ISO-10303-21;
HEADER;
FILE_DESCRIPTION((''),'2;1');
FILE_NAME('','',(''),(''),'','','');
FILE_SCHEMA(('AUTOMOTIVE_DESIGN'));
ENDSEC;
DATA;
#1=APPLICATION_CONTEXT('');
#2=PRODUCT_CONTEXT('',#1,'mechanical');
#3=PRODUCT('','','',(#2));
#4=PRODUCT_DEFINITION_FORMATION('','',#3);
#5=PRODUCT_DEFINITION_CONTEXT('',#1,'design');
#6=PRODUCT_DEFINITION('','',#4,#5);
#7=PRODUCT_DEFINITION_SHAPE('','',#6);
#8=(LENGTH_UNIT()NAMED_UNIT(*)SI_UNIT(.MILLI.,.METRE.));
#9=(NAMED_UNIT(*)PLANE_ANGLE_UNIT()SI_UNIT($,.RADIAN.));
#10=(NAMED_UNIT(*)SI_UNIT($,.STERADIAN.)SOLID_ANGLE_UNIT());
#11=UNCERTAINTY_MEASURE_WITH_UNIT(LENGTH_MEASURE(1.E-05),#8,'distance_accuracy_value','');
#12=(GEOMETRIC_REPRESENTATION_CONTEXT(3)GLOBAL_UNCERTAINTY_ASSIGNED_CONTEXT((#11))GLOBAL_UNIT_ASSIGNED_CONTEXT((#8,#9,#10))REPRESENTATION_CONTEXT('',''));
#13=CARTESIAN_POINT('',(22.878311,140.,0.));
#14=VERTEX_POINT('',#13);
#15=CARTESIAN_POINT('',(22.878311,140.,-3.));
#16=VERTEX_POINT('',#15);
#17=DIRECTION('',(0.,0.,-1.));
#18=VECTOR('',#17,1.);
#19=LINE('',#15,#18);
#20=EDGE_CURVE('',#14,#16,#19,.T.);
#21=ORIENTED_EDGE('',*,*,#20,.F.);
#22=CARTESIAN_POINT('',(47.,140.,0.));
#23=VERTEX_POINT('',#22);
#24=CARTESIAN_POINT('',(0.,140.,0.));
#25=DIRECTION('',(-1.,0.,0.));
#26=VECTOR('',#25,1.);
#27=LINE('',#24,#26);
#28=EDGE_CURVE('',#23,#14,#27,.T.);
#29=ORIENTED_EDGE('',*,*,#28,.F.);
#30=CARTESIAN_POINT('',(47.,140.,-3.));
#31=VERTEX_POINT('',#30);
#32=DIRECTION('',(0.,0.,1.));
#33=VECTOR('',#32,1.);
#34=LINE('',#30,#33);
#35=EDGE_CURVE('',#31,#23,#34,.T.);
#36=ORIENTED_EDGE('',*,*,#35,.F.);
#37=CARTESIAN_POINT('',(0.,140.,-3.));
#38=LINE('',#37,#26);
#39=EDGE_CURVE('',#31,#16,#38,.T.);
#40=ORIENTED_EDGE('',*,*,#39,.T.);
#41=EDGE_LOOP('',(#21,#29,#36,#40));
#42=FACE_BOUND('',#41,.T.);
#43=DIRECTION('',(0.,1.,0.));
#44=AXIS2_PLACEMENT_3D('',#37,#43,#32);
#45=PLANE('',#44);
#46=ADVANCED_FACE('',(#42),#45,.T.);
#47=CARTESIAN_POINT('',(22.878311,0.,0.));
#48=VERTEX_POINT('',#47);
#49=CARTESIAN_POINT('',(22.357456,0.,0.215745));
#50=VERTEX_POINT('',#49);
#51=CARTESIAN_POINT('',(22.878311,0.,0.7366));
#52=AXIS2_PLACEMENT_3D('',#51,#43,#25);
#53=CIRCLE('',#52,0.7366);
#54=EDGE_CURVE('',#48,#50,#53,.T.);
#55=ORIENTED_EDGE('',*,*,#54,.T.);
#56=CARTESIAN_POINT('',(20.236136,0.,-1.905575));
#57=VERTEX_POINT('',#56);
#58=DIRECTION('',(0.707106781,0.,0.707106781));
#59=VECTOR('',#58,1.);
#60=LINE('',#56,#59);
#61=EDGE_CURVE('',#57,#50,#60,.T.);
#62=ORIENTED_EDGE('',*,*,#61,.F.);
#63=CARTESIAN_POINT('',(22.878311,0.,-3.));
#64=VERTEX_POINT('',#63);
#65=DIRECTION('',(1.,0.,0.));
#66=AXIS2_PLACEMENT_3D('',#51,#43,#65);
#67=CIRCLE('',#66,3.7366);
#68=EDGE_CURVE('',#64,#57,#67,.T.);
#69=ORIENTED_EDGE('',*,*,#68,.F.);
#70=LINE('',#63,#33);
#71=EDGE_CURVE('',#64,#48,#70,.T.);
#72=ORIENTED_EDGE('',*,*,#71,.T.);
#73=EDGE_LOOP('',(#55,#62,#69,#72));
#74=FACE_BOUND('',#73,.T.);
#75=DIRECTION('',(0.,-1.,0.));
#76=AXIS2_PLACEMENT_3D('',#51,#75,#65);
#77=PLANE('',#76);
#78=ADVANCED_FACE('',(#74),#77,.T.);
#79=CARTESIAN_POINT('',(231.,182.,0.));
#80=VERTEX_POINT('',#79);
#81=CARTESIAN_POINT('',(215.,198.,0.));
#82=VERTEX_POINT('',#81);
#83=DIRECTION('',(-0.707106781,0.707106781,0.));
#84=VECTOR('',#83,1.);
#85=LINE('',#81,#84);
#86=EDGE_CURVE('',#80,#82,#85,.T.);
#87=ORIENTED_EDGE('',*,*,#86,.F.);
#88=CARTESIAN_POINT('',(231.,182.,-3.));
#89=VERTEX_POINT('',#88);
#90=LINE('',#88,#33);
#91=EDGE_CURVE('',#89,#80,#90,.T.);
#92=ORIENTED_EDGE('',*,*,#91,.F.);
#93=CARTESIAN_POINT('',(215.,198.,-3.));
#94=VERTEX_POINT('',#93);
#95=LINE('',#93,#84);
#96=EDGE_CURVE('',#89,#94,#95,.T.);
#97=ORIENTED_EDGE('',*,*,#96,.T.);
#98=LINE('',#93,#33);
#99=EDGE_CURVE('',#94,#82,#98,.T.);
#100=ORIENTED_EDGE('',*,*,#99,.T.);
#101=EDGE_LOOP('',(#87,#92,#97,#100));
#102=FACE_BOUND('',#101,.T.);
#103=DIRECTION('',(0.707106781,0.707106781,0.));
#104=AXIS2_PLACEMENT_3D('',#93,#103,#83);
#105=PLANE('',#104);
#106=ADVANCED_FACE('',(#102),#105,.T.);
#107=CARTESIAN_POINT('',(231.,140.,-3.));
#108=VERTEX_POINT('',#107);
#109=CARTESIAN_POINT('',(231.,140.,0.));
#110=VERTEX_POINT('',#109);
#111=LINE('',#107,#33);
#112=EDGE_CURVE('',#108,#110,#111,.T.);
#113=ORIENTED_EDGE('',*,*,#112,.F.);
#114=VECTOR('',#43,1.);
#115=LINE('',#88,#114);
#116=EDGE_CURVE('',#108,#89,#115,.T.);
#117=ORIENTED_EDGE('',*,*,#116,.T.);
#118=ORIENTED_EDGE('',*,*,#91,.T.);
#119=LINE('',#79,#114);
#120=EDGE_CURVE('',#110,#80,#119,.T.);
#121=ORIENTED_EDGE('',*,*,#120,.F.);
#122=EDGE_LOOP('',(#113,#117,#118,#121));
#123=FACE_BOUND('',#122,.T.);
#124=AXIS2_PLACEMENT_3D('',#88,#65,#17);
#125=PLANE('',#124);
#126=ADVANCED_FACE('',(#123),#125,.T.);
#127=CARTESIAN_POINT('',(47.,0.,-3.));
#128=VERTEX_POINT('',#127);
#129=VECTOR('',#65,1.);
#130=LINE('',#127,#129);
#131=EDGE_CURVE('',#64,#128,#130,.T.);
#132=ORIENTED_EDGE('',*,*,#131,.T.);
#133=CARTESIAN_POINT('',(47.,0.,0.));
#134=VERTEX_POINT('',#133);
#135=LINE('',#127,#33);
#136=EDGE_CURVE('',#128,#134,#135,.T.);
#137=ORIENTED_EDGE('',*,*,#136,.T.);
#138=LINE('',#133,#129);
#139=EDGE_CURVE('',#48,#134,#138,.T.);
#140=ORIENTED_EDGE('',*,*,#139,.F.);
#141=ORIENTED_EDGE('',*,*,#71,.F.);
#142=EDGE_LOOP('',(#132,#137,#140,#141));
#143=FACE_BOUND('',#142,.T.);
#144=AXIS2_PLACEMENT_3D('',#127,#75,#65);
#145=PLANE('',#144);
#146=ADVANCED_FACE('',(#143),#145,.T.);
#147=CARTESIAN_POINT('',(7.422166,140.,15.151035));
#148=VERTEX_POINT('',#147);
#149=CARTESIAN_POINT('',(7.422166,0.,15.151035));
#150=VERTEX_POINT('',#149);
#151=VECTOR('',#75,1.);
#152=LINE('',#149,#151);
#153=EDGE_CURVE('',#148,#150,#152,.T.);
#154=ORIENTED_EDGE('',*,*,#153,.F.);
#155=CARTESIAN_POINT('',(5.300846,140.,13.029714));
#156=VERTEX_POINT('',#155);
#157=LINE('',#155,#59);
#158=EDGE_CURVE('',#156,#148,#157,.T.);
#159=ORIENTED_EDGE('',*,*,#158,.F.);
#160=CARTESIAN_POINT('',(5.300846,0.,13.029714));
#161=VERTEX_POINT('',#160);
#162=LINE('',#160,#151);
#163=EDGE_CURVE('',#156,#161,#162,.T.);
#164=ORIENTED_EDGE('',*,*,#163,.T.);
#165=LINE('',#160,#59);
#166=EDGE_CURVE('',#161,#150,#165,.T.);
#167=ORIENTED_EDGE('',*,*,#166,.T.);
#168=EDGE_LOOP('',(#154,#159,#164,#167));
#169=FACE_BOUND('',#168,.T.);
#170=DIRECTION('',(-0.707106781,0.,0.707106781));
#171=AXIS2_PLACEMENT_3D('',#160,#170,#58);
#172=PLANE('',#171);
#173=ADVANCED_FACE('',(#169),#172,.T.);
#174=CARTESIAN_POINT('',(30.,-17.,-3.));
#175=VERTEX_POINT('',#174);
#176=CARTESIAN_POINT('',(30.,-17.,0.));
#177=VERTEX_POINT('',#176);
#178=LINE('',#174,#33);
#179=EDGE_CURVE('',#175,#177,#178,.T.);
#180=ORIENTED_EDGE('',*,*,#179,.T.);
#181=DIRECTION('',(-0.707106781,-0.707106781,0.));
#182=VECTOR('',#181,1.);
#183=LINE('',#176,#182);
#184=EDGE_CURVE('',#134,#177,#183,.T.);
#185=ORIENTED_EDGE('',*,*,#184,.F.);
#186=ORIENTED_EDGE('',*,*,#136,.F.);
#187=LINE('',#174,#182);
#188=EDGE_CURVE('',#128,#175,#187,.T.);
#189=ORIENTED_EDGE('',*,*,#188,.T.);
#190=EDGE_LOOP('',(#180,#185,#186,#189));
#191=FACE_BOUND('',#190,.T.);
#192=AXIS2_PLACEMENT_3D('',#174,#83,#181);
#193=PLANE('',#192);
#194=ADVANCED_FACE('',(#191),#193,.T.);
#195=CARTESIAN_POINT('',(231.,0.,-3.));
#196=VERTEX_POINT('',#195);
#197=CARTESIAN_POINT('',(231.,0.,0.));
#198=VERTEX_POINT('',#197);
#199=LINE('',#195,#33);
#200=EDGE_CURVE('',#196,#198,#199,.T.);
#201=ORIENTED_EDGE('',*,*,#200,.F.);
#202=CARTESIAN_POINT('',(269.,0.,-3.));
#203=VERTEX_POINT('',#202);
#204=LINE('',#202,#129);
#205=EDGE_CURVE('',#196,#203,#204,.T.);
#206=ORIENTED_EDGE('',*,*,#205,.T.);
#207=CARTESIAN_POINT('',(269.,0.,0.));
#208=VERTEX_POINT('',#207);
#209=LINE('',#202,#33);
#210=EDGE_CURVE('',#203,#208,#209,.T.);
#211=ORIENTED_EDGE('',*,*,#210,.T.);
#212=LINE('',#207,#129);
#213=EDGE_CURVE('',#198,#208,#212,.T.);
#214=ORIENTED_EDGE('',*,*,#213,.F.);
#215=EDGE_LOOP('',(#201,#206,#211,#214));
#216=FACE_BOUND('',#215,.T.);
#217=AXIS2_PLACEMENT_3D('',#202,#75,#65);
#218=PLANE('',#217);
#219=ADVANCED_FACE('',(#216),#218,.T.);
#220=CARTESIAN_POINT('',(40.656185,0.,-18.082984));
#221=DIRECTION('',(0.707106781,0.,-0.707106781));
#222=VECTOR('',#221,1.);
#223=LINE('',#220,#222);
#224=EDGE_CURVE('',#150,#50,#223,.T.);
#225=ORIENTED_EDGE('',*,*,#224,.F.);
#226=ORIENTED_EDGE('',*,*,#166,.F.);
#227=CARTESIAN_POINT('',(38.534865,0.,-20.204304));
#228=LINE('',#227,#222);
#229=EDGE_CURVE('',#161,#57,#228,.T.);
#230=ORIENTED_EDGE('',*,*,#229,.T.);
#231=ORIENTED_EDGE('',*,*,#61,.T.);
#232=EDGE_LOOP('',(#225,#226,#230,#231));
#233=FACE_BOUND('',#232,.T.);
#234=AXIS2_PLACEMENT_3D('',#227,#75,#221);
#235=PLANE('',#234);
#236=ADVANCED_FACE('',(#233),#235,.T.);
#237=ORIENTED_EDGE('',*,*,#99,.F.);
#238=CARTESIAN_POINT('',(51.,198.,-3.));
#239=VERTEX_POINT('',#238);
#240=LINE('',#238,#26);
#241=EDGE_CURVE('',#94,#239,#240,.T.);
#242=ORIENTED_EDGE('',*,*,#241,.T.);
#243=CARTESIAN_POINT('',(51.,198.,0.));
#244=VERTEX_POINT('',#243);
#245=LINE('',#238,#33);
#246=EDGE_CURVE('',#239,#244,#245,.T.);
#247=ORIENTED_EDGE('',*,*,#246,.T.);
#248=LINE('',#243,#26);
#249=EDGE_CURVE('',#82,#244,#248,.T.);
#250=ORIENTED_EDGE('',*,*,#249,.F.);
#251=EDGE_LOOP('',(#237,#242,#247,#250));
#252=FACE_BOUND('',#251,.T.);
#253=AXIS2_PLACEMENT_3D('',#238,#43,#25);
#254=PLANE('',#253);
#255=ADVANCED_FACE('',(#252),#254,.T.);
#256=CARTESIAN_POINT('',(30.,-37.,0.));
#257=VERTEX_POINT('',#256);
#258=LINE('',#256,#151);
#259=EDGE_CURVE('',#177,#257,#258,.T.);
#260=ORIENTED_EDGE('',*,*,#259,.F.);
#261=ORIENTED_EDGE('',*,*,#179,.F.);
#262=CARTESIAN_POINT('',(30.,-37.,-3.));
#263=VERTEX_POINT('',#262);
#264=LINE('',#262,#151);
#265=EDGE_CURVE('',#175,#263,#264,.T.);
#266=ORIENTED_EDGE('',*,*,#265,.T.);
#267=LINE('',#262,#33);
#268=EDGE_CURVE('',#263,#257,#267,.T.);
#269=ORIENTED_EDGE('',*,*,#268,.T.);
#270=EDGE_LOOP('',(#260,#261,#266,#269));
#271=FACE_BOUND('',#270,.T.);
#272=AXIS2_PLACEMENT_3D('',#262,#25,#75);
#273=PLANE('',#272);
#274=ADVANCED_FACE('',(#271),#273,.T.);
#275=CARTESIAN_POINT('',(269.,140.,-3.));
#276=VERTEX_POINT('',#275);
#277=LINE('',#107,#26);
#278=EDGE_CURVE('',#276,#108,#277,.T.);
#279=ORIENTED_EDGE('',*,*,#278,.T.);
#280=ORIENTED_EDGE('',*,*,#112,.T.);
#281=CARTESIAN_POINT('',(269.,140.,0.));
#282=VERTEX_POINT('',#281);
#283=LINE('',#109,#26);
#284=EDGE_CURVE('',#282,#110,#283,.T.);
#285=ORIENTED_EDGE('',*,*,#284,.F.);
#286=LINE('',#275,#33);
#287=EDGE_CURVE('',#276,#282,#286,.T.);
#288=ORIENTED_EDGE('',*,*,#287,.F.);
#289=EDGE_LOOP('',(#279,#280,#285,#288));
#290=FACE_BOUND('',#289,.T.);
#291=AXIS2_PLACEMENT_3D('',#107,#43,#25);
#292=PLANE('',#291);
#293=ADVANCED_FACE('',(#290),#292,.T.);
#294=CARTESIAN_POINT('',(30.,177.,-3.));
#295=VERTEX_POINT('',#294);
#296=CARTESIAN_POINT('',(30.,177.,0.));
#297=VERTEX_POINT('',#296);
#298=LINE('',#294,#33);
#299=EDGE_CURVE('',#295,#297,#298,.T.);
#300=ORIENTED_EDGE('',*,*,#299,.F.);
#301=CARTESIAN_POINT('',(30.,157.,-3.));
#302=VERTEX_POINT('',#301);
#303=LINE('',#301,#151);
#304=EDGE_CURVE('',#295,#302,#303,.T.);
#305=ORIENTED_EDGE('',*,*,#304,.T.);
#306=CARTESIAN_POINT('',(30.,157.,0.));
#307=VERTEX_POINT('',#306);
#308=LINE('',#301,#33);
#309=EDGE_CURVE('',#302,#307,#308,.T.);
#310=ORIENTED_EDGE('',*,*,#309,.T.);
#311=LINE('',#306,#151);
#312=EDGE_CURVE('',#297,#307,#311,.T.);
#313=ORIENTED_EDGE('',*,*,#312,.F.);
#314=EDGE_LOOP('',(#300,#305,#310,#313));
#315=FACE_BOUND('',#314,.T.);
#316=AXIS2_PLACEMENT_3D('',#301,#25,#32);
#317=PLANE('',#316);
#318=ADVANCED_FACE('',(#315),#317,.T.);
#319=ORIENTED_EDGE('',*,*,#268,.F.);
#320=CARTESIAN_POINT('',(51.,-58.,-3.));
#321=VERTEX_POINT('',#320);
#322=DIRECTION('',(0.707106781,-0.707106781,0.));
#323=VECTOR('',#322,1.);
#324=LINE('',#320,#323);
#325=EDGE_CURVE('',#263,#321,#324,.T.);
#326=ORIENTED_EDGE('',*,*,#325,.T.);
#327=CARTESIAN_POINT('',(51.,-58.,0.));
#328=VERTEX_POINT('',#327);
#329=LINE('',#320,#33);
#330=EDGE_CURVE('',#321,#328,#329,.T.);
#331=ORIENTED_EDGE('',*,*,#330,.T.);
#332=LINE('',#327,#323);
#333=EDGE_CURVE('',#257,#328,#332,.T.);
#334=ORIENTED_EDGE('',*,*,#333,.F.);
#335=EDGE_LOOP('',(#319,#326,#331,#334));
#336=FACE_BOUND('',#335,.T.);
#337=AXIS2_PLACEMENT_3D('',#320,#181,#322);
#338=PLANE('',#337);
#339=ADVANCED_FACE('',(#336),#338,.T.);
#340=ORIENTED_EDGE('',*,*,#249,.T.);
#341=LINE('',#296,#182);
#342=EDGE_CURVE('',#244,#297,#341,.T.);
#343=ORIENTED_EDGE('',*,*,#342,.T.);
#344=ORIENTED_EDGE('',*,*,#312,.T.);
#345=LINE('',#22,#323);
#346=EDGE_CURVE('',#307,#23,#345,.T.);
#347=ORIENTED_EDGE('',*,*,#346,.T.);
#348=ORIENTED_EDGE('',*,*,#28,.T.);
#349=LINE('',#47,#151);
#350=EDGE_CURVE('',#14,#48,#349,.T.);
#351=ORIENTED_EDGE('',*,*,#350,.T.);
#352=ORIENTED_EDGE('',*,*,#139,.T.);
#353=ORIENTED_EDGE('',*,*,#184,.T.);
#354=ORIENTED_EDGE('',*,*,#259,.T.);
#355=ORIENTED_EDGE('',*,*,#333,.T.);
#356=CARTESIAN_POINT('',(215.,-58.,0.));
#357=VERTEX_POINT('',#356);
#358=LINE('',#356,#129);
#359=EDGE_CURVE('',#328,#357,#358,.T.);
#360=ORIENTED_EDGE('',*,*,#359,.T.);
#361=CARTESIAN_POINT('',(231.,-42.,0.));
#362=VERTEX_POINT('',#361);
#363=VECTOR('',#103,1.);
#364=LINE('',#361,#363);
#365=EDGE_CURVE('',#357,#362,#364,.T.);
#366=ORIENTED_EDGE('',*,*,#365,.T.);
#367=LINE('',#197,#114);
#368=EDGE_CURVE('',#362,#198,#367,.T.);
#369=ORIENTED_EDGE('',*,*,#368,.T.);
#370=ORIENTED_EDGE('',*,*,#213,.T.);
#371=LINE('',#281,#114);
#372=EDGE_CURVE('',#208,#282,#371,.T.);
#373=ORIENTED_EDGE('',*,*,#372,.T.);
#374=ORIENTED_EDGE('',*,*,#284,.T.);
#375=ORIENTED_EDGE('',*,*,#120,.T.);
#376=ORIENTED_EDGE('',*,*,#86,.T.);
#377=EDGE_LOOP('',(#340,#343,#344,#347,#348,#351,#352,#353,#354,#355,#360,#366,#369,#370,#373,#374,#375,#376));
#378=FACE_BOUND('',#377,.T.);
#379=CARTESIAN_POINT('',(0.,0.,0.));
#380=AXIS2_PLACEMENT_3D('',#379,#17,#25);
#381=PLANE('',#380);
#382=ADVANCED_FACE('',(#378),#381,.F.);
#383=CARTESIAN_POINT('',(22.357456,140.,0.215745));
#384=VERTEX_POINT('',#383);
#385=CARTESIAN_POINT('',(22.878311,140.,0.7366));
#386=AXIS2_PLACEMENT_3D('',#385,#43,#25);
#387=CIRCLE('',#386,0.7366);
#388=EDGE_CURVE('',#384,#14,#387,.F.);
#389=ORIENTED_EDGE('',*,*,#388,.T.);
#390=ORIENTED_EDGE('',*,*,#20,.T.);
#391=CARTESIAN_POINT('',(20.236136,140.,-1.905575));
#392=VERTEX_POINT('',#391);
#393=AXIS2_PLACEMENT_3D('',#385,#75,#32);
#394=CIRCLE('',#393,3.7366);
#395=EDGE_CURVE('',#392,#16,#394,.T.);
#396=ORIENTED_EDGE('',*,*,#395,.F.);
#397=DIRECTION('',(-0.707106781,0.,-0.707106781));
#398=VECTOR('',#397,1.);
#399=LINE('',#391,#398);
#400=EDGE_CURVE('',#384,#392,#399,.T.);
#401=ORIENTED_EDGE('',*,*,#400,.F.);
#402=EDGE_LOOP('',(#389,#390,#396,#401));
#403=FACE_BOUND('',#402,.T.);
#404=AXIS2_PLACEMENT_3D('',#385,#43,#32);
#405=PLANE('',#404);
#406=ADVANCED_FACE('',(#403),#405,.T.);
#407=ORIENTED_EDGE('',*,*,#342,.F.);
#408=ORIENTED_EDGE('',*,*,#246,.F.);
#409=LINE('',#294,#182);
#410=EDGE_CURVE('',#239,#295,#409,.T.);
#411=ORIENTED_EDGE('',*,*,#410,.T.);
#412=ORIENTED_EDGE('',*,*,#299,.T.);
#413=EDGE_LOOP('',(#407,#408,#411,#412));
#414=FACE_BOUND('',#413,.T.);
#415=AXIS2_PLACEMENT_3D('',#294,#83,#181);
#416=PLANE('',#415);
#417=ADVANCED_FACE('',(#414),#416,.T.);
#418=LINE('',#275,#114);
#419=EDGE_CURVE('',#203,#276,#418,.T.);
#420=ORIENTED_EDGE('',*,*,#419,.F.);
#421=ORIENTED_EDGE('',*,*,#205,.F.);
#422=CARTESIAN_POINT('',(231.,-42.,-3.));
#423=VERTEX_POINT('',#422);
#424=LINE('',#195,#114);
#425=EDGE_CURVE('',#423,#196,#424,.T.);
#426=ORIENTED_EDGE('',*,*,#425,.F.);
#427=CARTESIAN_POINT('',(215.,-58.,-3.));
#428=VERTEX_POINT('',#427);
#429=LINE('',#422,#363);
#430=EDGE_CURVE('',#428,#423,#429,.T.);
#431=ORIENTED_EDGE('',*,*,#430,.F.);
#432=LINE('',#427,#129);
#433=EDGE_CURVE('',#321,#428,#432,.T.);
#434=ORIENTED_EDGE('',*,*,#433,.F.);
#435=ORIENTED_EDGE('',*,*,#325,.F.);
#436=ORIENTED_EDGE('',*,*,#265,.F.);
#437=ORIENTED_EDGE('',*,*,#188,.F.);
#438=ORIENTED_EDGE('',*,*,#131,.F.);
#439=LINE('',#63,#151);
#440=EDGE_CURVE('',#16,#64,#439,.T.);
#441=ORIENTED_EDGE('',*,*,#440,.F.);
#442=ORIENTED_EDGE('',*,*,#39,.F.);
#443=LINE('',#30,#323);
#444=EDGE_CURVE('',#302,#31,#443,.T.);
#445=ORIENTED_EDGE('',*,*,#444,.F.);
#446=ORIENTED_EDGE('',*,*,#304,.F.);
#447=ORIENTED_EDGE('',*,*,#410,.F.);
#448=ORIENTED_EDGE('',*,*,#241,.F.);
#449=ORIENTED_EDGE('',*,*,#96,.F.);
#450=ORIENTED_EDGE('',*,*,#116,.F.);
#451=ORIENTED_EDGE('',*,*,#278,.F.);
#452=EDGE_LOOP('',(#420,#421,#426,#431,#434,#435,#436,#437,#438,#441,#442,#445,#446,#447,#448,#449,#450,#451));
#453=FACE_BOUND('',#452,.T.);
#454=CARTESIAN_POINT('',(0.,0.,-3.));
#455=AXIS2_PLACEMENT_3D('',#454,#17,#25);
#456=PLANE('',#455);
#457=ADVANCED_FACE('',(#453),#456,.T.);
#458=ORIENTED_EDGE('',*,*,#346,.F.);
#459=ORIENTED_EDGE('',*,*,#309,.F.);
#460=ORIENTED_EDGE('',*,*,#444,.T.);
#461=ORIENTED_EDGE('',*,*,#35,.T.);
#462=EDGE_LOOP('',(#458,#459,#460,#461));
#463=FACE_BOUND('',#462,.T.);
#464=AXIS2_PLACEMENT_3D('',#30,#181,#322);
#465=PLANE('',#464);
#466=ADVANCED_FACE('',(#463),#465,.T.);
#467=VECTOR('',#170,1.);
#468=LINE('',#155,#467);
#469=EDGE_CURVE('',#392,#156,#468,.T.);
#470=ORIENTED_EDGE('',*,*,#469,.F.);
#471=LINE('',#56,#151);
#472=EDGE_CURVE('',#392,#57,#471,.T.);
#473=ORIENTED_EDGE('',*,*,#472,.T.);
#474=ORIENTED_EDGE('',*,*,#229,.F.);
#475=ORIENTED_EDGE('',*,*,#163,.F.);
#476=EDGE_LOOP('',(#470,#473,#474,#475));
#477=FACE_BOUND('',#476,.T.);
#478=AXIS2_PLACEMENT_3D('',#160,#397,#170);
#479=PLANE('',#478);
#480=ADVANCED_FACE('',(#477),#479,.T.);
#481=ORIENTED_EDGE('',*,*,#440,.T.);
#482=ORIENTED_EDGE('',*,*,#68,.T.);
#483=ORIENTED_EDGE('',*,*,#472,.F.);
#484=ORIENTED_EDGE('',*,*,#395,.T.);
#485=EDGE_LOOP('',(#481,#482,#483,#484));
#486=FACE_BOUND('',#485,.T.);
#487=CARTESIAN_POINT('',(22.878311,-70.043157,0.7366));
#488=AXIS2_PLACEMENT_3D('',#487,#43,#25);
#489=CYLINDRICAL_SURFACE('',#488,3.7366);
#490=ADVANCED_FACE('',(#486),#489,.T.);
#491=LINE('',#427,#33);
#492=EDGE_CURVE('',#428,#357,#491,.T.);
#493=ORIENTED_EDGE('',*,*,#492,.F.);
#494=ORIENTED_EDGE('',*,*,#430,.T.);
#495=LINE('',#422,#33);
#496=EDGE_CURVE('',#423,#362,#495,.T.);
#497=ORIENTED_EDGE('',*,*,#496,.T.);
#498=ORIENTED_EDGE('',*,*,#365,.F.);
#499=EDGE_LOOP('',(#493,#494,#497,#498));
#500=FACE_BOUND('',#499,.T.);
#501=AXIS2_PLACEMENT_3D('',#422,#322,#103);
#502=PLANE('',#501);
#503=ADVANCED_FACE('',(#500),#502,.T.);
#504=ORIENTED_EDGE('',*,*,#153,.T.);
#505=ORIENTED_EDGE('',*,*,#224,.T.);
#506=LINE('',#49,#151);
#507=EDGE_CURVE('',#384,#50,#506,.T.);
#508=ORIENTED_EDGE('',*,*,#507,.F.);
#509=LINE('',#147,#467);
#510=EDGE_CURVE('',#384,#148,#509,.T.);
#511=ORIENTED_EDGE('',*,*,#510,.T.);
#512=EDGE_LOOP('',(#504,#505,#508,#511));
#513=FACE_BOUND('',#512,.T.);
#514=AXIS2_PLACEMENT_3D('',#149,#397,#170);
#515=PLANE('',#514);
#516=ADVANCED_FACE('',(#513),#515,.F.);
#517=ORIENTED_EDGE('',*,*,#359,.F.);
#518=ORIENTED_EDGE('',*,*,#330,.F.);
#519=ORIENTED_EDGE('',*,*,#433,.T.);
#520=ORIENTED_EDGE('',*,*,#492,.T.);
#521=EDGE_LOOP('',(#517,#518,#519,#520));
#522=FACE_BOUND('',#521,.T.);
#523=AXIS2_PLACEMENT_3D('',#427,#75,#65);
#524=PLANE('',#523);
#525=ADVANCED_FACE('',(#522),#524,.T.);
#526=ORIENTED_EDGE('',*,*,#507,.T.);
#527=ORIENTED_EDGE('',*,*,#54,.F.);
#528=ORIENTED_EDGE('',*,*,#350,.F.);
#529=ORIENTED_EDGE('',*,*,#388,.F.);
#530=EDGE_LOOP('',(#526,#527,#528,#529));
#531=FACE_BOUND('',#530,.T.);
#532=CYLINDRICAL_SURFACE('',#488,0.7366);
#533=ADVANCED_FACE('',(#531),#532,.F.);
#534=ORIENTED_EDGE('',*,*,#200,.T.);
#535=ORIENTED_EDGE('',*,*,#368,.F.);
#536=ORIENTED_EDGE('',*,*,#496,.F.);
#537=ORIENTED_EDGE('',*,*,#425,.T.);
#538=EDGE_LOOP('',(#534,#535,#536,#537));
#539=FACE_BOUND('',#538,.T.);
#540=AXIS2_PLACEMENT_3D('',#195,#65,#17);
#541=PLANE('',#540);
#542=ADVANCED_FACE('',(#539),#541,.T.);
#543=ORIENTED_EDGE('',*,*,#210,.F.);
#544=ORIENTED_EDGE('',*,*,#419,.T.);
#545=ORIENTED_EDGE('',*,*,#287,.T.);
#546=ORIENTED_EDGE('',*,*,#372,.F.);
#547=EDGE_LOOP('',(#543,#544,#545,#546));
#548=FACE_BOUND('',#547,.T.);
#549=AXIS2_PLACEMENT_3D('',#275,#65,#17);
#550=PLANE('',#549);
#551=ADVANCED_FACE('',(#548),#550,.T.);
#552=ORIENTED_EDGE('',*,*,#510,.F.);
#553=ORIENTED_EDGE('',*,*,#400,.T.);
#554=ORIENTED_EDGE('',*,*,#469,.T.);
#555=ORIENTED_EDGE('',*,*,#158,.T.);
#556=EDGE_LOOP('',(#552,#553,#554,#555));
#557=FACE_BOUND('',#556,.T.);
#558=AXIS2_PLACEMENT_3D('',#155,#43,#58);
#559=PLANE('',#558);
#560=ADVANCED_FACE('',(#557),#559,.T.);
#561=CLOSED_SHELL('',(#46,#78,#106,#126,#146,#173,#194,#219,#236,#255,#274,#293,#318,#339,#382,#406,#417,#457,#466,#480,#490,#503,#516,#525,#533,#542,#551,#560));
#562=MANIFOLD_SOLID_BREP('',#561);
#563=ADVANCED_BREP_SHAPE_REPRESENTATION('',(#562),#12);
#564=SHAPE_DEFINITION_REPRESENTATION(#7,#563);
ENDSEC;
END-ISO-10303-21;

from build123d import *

# Parameters (mm, degrees)
BASE_FLANGE1_DEPTH     = 3
SKETCHED_BEND2_DEPTH   = 140
SKETCHED_BEND2_2_DEPTH = 140


# Read off the part's stored shape, not the designer's step: Sketched Bend2
# Sheet-metal steps are written as plain solids
with BuildPart() as part:
    # Sketch1 → Base-Flange1 (new body)
    with BuildSketch(Plane.XY):
        Polygon((0, 0), (0, 140), (47, 140), (30, 157), (30, 177), (51, 198), (215, 198), (231, 182), (231, 140), (269, 140), (269, 0), (231, 0), (231, -42), (215, -58), (51, -58), (30, -37), (30, -17), (47, 0), align=None)
    extrude(amount=-BASE_FLANGE1_DEPTH)

    # Sketched Bend2 outline → Sketched Bend2 (cut)
    with BuildSketch(Plane(origin=(0, 0, 0), x_dir=(1, 0, 0), z_dir=(0, 1, 0))):
        with BuildLine():
            Line((18.330560369, 0), (20.236135568, 1.905575199))
            ThreePointArc((20.236135568, 1.905575199), (21.448375853, 2.715568261), (22.878310766, 3))
            Line((22.878310766, 3), (0, 3))
            Line((0, 3), (0, 0))
            Line((0, 0), (18.330560369, 0))
        make_face()
    extrude(amount=SKETCHED_BEND2_DEPTH, mode=Mode.SUBTRACT)

    # Sketched Bend2 2 outline → Sketched Bend2 2 (add)
    with BuildSketch(Plane(origin=(0, 0, 0), x_dir=(1, 0, 0), z_dir=(0, 1, 0))):
        with BuildLine():
            Line((22.878310766, 0), (18.330560369, 0))
            Line((18.330560369, 0), (5.30084588, -13.029714489))
            Line((5.30084588, -13.029714489), (7.422166224, -15.151034832))
            Line((7.422166224, -15.151034832), (22.357455911, -0.215745145))
            ThreePointArc((22.357455911, -0.215745145), (22.59642615, -0.056070336), (22.878310766, 0))
        make_face()
    extrude(amount=SKETCHED_BEND2_2_DEPTH)


solid = part.part
